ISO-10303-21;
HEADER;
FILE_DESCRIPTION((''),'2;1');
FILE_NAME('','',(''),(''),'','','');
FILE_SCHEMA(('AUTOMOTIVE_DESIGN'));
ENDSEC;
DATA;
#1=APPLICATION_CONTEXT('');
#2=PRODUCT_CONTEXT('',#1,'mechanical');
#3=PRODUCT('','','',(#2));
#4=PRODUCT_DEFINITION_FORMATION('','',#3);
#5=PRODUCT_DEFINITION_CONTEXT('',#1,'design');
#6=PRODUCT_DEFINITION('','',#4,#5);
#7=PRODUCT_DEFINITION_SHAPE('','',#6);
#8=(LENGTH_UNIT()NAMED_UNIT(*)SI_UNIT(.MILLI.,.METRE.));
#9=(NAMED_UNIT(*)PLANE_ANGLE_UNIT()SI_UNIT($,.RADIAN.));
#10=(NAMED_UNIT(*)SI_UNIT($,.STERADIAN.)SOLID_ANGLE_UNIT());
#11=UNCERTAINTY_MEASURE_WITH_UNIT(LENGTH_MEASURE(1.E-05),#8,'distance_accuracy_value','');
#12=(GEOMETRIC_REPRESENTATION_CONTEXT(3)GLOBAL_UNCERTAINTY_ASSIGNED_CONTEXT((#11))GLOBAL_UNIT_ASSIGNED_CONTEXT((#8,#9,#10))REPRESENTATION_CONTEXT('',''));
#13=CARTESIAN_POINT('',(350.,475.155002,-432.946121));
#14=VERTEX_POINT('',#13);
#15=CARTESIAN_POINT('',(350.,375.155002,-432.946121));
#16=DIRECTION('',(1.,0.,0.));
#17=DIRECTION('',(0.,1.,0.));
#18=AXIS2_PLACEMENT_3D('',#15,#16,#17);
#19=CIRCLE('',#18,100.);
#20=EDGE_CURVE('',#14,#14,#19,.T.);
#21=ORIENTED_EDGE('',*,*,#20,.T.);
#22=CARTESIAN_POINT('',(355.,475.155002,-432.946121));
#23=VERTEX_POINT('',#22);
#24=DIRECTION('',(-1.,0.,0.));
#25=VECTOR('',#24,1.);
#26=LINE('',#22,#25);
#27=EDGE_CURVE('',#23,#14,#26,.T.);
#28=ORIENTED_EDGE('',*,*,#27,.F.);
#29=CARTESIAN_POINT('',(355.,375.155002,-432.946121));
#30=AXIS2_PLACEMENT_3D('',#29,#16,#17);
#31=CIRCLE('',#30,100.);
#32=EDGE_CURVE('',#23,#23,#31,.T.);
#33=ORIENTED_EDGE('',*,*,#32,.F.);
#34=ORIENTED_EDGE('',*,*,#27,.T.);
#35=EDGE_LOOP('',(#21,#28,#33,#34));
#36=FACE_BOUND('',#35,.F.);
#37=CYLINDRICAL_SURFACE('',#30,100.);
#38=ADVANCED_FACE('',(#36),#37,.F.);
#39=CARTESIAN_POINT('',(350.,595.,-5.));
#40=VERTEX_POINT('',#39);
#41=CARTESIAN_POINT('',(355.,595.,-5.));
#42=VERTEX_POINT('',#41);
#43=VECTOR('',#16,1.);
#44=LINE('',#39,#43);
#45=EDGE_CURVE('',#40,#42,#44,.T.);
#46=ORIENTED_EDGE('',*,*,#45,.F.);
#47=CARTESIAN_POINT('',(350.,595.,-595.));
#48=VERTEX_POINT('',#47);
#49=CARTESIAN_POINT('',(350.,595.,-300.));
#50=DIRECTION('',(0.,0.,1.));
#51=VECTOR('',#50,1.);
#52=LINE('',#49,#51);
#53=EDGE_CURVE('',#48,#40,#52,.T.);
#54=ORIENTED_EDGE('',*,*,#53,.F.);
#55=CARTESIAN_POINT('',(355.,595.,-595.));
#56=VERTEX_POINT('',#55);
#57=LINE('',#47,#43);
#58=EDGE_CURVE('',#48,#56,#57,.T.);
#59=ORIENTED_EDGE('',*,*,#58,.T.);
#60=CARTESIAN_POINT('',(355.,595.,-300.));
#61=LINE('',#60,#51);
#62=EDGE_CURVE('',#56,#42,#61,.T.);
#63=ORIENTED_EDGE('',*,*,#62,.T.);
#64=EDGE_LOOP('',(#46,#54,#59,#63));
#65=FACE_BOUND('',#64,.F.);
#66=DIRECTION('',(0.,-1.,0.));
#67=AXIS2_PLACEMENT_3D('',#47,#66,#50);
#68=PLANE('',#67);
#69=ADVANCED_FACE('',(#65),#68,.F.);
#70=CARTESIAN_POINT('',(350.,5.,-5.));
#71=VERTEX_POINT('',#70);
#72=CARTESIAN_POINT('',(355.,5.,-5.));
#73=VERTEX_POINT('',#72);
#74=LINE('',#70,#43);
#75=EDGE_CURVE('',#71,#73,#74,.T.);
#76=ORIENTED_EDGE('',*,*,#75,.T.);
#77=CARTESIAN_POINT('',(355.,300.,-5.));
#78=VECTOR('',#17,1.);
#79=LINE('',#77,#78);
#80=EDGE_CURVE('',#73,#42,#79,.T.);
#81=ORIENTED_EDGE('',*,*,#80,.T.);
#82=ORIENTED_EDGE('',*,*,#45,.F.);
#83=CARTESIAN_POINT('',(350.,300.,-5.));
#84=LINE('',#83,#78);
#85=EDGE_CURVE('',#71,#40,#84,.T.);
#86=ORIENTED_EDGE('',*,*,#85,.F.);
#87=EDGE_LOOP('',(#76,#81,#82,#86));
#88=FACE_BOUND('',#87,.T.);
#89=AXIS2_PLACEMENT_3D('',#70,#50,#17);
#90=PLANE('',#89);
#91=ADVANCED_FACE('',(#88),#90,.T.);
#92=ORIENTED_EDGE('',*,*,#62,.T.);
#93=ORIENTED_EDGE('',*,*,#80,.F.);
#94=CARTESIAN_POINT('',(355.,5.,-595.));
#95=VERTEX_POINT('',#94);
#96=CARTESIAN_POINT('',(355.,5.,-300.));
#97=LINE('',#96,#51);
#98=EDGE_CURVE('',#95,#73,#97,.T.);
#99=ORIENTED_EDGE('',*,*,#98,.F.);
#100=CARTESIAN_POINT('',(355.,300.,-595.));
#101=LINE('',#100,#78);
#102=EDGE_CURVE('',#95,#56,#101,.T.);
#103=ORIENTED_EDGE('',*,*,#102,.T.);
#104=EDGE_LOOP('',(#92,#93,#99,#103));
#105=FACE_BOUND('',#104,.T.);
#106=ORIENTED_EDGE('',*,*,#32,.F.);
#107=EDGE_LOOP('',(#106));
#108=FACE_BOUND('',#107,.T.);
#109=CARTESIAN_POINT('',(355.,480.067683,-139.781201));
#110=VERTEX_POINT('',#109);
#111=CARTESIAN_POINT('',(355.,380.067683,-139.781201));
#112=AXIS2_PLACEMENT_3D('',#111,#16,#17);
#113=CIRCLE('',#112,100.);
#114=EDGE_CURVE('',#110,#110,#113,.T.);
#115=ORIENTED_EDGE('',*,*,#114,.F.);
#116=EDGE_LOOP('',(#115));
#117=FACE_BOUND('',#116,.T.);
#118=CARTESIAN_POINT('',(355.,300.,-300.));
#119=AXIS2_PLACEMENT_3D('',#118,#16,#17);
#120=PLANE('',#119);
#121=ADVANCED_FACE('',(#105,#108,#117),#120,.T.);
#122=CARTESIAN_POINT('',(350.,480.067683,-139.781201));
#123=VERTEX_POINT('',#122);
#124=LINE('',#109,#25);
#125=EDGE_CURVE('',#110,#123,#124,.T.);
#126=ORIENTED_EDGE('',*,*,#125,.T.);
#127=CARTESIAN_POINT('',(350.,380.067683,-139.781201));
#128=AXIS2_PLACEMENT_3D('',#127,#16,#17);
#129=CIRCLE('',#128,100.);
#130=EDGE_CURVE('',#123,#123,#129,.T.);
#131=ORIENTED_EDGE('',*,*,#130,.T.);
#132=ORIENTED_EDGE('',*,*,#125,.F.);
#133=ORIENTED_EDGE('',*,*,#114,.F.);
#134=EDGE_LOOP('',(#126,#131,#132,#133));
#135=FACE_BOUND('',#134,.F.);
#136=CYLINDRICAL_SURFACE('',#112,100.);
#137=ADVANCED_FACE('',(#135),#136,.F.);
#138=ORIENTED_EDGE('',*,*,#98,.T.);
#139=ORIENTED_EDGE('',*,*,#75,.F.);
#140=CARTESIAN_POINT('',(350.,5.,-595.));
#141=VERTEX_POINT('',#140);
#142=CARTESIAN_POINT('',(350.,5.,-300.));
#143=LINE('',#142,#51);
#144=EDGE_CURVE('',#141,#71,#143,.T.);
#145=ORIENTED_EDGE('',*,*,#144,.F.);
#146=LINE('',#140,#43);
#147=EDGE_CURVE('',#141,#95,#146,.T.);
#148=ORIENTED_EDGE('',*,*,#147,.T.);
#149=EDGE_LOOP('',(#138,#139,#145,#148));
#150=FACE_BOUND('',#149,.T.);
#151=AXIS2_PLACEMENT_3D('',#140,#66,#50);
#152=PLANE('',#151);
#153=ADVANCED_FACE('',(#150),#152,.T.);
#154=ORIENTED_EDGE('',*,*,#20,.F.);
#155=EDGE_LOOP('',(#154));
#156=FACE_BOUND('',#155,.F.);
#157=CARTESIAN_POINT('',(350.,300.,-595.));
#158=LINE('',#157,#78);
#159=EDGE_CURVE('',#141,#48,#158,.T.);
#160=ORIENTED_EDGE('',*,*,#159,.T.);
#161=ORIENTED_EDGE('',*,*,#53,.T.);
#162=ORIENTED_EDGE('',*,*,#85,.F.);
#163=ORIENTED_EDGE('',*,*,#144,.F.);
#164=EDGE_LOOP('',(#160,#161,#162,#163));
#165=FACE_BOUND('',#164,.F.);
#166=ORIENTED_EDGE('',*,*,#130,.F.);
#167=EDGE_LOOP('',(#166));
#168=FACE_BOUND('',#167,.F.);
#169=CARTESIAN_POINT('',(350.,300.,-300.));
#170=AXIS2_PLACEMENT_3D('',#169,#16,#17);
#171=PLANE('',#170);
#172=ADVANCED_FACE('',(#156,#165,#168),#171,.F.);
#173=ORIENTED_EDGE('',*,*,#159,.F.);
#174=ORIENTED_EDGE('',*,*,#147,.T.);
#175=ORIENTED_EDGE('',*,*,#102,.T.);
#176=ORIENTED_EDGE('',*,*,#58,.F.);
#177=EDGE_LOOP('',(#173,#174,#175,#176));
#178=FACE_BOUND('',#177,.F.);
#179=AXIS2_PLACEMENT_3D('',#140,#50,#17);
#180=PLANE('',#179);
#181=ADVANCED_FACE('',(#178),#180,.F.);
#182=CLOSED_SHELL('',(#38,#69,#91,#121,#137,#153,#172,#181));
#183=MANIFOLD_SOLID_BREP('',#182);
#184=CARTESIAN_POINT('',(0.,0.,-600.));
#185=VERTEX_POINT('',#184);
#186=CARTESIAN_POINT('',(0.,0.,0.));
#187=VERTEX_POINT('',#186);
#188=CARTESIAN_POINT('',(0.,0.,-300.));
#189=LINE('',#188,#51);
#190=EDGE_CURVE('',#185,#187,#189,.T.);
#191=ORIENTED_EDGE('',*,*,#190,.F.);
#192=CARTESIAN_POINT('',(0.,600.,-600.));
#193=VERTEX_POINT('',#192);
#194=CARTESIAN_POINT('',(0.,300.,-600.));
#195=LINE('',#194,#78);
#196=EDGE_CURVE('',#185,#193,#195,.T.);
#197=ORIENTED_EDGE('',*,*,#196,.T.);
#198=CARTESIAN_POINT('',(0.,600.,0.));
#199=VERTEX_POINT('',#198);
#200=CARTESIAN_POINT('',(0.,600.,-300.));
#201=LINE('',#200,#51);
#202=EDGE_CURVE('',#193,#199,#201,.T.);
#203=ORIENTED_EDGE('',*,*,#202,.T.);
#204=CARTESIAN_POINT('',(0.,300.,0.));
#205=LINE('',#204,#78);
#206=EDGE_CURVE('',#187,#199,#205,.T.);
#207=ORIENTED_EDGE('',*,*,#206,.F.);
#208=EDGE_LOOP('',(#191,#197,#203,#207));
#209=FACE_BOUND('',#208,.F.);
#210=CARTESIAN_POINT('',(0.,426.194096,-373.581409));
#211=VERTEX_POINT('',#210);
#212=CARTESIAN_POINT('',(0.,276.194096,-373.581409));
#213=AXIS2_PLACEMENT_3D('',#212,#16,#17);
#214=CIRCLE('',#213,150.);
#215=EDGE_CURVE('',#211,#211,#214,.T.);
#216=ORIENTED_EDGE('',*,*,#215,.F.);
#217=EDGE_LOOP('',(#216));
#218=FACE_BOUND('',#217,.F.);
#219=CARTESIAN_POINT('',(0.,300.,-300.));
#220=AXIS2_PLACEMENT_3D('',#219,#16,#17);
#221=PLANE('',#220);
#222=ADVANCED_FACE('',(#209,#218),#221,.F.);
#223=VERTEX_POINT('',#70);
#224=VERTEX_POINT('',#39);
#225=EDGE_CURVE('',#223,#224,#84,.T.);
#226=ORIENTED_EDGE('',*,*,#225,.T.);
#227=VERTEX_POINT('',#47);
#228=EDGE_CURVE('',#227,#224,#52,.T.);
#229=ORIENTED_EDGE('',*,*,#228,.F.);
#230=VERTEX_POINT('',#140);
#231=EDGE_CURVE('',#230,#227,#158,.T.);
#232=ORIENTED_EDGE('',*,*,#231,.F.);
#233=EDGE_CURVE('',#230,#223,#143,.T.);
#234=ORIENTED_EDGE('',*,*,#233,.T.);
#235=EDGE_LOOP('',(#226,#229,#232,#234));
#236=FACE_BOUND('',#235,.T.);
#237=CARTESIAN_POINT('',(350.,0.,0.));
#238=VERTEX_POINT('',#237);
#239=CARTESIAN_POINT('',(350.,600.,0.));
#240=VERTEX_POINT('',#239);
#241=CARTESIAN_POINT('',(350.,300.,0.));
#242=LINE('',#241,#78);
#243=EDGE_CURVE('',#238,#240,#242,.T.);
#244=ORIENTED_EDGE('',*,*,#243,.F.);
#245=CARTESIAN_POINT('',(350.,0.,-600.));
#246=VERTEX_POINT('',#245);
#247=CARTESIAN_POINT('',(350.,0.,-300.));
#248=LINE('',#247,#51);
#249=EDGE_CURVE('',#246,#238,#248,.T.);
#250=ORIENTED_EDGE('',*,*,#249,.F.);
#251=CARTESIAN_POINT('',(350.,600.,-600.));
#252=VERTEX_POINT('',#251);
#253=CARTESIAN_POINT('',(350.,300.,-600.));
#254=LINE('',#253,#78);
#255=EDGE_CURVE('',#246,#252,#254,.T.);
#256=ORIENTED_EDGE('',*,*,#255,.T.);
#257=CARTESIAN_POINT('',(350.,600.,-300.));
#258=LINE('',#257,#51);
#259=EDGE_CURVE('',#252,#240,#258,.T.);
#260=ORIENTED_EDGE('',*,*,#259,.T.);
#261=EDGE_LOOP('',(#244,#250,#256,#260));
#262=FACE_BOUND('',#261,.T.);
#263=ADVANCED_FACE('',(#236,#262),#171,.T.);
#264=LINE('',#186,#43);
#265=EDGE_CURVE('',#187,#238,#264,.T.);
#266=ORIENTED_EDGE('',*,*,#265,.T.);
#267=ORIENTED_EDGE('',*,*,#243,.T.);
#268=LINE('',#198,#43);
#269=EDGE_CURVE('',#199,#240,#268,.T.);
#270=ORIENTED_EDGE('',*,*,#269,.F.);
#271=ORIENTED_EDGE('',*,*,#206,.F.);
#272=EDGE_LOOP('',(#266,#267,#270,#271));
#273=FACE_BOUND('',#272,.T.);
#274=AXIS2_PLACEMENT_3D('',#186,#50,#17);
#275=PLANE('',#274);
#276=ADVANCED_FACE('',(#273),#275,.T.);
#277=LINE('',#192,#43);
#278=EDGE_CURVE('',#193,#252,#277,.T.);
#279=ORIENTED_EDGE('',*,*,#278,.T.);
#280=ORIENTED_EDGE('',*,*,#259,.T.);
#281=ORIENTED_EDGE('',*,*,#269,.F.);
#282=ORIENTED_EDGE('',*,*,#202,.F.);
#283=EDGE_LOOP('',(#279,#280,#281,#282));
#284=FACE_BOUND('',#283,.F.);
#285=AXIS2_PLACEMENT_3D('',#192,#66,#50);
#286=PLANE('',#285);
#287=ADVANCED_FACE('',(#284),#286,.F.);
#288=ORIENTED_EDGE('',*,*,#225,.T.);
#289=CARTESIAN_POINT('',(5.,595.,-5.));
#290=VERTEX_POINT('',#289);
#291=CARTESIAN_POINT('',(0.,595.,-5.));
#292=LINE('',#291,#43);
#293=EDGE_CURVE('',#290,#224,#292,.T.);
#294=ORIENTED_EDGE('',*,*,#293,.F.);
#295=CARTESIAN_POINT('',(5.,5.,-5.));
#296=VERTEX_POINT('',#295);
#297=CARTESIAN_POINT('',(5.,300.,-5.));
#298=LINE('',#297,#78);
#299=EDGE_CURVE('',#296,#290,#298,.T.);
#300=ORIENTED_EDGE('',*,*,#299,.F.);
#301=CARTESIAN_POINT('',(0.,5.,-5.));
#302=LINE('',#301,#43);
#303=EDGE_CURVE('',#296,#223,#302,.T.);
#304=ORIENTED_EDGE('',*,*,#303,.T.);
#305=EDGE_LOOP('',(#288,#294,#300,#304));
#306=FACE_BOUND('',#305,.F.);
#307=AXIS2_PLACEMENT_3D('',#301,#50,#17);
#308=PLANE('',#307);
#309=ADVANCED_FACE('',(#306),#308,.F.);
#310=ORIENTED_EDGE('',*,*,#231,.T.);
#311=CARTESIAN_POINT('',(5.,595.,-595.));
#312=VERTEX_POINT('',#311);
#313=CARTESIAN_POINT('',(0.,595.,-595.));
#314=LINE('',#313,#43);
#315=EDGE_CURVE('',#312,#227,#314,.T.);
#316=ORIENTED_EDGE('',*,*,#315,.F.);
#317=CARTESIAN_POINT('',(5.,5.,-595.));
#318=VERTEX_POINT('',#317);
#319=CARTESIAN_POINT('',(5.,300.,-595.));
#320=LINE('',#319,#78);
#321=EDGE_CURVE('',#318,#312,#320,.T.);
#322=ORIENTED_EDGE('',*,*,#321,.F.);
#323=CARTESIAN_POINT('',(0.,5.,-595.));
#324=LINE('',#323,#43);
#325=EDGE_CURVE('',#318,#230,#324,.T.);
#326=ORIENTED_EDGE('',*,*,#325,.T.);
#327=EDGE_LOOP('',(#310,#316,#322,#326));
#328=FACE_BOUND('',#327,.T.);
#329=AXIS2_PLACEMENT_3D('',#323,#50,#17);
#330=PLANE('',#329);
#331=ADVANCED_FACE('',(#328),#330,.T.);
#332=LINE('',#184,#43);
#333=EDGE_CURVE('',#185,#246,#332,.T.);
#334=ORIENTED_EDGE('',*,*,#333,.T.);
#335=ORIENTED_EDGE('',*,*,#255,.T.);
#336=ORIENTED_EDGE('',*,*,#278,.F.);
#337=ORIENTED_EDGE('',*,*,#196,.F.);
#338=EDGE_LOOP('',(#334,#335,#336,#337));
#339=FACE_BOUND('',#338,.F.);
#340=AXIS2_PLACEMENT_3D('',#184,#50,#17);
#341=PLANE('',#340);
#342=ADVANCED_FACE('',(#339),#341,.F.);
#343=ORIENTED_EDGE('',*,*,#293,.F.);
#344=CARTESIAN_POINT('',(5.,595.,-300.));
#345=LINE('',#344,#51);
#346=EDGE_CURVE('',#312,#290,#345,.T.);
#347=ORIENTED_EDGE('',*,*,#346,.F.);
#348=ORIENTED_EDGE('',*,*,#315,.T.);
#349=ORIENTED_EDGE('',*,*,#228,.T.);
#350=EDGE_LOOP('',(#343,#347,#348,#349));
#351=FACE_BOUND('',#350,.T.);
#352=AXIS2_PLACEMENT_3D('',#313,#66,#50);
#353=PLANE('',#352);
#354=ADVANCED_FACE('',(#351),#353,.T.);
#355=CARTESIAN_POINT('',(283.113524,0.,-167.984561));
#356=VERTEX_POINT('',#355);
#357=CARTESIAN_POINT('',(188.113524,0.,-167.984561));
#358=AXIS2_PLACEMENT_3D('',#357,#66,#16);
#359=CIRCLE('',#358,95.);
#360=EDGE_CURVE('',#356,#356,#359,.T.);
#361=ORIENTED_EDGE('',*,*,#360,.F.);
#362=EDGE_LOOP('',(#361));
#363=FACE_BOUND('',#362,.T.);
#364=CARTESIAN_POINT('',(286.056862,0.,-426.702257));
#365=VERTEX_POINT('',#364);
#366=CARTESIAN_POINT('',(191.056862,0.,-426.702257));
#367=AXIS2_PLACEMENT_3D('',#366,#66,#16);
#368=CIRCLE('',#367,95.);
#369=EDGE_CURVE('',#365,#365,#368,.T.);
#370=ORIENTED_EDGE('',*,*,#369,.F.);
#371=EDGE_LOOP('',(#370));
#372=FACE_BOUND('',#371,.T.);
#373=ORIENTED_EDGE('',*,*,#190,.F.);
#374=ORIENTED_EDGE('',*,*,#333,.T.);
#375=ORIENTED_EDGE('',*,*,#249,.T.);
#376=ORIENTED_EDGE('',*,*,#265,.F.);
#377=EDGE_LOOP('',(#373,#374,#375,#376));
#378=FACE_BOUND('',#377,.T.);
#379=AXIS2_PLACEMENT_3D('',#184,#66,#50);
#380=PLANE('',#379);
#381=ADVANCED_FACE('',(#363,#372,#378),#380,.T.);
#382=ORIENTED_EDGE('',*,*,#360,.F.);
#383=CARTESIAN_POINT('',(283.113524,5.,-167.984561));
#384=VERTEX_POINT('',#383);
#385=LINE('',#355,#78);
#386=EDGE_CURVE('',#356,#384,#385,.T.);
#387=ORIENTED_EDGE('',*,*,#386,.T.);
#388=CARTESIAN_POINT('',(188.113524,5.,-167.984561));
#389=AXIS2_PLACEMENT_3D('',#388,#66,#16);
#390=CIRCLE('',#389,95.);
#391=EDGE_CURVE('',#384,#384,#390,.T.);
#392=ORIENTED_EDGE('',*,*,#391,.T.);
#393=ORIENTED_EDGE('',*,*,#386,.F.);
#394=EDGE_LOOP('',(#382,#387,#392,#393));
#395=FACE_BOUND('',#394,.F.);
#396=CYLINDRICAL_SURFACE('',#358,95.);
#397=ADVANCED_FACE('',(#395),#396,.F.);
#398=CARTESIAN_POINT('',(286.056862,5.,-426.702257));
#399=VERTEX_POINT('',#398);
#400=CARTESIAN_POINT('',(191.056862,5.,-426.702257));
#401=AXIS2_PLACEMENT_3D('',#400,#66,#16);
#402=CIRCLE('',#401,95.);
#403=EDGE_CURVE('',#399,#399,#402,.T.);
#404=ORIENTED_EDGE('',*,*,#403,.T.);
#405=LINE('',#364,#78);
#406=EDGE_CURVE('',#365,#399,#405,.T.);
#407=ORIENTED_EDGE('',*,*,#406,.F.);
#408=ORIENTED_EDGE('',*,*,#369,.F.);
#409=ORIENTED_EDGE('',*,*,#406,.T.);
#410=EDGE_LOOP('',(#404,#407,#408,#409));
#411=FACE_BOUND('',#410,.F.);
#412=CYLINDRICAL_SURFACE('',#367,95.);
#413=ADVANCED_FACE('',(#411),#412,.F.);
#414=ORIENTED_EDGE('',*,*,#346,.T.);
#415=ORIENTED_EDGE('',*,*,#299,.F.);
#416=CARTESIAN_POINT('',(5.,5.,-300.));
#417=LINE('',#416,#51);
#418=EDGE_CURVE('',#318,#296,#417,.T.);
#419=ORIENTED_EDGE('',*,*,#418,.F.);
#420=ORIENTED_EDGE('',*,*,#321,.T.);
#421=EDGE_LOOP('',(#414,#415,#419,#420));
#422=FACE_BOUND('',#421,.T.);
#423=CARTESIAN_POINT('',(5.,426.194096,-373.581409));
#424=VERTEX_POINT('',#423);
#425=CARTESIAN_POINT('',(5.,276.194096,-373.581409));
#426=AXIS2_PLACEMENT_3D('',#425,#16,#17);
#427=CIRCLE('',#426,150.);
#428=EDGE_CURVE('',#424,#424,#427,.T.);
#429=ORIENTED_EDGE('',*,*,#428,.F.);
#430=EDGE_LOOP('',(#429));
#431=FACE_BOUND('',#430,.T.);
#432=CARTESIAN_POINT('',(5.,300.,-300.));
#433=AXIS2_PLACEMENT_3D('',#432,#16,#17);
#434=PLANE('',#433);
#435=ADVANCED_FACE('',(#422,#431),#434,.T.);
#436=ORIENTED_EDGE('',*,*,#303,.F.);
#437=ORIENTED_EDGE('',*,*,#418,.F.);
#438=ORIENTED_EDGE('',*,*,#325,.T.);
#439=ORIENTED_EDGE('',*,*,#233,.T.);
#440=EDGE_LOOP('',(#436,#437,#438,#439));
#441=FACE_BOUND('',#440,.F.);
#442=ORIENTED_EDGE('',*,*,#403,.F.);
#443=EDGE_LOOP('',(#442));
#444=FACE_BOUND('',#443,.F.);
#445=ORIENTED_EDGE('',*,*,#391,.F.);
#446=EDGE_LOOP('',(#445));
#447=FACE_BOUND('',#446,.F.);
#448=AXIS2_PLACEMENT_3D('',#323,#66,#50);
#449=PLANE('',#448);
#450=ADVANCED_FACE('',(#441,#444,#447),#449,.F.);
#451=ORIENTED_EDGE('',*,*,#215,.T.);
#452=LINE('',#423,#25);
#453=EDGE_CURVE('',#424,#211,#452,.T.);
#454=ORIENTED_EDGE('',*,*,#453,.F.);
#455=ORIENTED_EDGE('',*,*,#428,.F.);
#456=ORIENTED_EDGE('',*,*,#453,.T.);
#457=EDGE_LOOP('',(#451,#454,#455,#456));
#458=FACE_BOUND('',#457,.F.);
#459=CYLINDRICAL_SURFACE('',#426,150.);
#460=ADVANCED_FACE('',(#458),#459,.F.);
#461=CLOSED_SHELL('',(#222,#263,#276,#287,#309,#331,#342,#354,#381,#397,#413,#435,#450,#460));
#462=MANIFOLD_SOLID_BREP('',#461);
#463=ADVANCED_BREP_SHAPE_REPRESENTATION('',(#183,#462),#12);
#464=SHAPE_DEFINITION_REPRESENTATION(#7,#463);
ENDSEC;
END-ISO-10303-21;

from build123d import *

# Parameters (mm, degrees)
F0_W      = 600
F0_H      = 600
F0_W_2    = 590.0000002235
F0_H_2    = 590.0000002235
F1_DEPTH  = 350
F2_DEPTH  = 5
F3_R      = 150
F4_DEPTH  = 25
F5_R      = 95
F6_DEPTH  = 25
F7_W      = 590.0000002235
F7_H      = 590.0000002235
F8_DEPTH  = 5
F12_R     = 100
F13_DEPTH = 25


# Not quite as in the source:
# - a feature names something its author has since deleted; it is built from what else it names
# - the program builds the solid bodies; features that only make, move or delete a surface that nothing else refers to are left out


with BuildPart() as f1:
    # F0 (on Right) → F1 (new body)
    with BuildSketch(Plane.YZ):
        with Locations((300, -300)):
            Rectangle(F0_W, F0_H)
        with Locations((300, -300)):
            Rectangle(F0_W_2, F0_H_2, mode=Mode.SUBTRACT)
    extrude(amount=F1_DEPTH)

    # F0 (on Right) → F2 (join)
    with BuildSketch(Plane.YZ):
        with Locations((300, -300)):
            Rectangle(F0_W_2, F0_H_2)
    extrude(amount=F2_DEPTH)

    # F3 (on face) → F4 (cut)
    with BuildSketch(Plane.YZ.offset(5)):
        with Locations((276.1940956116, -373.5814094543)):
            Circle(F3_R)
    extrude(amount=-F4_DEPTH, mode=Mode.SUBTRACT)

    # F5 (on face) → F6 (cut)
    with BuildSketch(Plane.XZ):
        with Locations((191.0568624735, -426.7022567097)):
            Circle(F5_R)
        with Locations((188.1135240477, -167.9845607586)):
            Circle(F5_R)
    extrude(amount=-F6_DEPTH, mode=Mode.SUBTRACT)


with BuildPart() as f8:
    # F7 (on face) → F8 (new body)
    with BuildSketch(Plane.YZ.offset(350)):
        with Locations((300, -300)):
            Rectangle(F7_W, F7_H)
    extrude(amount=F8_DEPTH)

    # F12 (on face) → F13 (cut)
    with BuildSketch(Plane.YZ.offset(355)):
        with Locations((380.0676831018, -139.7812012694)):
            Circle(F12_R)
        with Locations((375.1550018787, -432.9461210735)):
            Circle(F12_R)
    extrude(amount=-F13_DEPTH, mode=Mode.SUBTRACT)


solid = Compound([f1.part, f8.part])
